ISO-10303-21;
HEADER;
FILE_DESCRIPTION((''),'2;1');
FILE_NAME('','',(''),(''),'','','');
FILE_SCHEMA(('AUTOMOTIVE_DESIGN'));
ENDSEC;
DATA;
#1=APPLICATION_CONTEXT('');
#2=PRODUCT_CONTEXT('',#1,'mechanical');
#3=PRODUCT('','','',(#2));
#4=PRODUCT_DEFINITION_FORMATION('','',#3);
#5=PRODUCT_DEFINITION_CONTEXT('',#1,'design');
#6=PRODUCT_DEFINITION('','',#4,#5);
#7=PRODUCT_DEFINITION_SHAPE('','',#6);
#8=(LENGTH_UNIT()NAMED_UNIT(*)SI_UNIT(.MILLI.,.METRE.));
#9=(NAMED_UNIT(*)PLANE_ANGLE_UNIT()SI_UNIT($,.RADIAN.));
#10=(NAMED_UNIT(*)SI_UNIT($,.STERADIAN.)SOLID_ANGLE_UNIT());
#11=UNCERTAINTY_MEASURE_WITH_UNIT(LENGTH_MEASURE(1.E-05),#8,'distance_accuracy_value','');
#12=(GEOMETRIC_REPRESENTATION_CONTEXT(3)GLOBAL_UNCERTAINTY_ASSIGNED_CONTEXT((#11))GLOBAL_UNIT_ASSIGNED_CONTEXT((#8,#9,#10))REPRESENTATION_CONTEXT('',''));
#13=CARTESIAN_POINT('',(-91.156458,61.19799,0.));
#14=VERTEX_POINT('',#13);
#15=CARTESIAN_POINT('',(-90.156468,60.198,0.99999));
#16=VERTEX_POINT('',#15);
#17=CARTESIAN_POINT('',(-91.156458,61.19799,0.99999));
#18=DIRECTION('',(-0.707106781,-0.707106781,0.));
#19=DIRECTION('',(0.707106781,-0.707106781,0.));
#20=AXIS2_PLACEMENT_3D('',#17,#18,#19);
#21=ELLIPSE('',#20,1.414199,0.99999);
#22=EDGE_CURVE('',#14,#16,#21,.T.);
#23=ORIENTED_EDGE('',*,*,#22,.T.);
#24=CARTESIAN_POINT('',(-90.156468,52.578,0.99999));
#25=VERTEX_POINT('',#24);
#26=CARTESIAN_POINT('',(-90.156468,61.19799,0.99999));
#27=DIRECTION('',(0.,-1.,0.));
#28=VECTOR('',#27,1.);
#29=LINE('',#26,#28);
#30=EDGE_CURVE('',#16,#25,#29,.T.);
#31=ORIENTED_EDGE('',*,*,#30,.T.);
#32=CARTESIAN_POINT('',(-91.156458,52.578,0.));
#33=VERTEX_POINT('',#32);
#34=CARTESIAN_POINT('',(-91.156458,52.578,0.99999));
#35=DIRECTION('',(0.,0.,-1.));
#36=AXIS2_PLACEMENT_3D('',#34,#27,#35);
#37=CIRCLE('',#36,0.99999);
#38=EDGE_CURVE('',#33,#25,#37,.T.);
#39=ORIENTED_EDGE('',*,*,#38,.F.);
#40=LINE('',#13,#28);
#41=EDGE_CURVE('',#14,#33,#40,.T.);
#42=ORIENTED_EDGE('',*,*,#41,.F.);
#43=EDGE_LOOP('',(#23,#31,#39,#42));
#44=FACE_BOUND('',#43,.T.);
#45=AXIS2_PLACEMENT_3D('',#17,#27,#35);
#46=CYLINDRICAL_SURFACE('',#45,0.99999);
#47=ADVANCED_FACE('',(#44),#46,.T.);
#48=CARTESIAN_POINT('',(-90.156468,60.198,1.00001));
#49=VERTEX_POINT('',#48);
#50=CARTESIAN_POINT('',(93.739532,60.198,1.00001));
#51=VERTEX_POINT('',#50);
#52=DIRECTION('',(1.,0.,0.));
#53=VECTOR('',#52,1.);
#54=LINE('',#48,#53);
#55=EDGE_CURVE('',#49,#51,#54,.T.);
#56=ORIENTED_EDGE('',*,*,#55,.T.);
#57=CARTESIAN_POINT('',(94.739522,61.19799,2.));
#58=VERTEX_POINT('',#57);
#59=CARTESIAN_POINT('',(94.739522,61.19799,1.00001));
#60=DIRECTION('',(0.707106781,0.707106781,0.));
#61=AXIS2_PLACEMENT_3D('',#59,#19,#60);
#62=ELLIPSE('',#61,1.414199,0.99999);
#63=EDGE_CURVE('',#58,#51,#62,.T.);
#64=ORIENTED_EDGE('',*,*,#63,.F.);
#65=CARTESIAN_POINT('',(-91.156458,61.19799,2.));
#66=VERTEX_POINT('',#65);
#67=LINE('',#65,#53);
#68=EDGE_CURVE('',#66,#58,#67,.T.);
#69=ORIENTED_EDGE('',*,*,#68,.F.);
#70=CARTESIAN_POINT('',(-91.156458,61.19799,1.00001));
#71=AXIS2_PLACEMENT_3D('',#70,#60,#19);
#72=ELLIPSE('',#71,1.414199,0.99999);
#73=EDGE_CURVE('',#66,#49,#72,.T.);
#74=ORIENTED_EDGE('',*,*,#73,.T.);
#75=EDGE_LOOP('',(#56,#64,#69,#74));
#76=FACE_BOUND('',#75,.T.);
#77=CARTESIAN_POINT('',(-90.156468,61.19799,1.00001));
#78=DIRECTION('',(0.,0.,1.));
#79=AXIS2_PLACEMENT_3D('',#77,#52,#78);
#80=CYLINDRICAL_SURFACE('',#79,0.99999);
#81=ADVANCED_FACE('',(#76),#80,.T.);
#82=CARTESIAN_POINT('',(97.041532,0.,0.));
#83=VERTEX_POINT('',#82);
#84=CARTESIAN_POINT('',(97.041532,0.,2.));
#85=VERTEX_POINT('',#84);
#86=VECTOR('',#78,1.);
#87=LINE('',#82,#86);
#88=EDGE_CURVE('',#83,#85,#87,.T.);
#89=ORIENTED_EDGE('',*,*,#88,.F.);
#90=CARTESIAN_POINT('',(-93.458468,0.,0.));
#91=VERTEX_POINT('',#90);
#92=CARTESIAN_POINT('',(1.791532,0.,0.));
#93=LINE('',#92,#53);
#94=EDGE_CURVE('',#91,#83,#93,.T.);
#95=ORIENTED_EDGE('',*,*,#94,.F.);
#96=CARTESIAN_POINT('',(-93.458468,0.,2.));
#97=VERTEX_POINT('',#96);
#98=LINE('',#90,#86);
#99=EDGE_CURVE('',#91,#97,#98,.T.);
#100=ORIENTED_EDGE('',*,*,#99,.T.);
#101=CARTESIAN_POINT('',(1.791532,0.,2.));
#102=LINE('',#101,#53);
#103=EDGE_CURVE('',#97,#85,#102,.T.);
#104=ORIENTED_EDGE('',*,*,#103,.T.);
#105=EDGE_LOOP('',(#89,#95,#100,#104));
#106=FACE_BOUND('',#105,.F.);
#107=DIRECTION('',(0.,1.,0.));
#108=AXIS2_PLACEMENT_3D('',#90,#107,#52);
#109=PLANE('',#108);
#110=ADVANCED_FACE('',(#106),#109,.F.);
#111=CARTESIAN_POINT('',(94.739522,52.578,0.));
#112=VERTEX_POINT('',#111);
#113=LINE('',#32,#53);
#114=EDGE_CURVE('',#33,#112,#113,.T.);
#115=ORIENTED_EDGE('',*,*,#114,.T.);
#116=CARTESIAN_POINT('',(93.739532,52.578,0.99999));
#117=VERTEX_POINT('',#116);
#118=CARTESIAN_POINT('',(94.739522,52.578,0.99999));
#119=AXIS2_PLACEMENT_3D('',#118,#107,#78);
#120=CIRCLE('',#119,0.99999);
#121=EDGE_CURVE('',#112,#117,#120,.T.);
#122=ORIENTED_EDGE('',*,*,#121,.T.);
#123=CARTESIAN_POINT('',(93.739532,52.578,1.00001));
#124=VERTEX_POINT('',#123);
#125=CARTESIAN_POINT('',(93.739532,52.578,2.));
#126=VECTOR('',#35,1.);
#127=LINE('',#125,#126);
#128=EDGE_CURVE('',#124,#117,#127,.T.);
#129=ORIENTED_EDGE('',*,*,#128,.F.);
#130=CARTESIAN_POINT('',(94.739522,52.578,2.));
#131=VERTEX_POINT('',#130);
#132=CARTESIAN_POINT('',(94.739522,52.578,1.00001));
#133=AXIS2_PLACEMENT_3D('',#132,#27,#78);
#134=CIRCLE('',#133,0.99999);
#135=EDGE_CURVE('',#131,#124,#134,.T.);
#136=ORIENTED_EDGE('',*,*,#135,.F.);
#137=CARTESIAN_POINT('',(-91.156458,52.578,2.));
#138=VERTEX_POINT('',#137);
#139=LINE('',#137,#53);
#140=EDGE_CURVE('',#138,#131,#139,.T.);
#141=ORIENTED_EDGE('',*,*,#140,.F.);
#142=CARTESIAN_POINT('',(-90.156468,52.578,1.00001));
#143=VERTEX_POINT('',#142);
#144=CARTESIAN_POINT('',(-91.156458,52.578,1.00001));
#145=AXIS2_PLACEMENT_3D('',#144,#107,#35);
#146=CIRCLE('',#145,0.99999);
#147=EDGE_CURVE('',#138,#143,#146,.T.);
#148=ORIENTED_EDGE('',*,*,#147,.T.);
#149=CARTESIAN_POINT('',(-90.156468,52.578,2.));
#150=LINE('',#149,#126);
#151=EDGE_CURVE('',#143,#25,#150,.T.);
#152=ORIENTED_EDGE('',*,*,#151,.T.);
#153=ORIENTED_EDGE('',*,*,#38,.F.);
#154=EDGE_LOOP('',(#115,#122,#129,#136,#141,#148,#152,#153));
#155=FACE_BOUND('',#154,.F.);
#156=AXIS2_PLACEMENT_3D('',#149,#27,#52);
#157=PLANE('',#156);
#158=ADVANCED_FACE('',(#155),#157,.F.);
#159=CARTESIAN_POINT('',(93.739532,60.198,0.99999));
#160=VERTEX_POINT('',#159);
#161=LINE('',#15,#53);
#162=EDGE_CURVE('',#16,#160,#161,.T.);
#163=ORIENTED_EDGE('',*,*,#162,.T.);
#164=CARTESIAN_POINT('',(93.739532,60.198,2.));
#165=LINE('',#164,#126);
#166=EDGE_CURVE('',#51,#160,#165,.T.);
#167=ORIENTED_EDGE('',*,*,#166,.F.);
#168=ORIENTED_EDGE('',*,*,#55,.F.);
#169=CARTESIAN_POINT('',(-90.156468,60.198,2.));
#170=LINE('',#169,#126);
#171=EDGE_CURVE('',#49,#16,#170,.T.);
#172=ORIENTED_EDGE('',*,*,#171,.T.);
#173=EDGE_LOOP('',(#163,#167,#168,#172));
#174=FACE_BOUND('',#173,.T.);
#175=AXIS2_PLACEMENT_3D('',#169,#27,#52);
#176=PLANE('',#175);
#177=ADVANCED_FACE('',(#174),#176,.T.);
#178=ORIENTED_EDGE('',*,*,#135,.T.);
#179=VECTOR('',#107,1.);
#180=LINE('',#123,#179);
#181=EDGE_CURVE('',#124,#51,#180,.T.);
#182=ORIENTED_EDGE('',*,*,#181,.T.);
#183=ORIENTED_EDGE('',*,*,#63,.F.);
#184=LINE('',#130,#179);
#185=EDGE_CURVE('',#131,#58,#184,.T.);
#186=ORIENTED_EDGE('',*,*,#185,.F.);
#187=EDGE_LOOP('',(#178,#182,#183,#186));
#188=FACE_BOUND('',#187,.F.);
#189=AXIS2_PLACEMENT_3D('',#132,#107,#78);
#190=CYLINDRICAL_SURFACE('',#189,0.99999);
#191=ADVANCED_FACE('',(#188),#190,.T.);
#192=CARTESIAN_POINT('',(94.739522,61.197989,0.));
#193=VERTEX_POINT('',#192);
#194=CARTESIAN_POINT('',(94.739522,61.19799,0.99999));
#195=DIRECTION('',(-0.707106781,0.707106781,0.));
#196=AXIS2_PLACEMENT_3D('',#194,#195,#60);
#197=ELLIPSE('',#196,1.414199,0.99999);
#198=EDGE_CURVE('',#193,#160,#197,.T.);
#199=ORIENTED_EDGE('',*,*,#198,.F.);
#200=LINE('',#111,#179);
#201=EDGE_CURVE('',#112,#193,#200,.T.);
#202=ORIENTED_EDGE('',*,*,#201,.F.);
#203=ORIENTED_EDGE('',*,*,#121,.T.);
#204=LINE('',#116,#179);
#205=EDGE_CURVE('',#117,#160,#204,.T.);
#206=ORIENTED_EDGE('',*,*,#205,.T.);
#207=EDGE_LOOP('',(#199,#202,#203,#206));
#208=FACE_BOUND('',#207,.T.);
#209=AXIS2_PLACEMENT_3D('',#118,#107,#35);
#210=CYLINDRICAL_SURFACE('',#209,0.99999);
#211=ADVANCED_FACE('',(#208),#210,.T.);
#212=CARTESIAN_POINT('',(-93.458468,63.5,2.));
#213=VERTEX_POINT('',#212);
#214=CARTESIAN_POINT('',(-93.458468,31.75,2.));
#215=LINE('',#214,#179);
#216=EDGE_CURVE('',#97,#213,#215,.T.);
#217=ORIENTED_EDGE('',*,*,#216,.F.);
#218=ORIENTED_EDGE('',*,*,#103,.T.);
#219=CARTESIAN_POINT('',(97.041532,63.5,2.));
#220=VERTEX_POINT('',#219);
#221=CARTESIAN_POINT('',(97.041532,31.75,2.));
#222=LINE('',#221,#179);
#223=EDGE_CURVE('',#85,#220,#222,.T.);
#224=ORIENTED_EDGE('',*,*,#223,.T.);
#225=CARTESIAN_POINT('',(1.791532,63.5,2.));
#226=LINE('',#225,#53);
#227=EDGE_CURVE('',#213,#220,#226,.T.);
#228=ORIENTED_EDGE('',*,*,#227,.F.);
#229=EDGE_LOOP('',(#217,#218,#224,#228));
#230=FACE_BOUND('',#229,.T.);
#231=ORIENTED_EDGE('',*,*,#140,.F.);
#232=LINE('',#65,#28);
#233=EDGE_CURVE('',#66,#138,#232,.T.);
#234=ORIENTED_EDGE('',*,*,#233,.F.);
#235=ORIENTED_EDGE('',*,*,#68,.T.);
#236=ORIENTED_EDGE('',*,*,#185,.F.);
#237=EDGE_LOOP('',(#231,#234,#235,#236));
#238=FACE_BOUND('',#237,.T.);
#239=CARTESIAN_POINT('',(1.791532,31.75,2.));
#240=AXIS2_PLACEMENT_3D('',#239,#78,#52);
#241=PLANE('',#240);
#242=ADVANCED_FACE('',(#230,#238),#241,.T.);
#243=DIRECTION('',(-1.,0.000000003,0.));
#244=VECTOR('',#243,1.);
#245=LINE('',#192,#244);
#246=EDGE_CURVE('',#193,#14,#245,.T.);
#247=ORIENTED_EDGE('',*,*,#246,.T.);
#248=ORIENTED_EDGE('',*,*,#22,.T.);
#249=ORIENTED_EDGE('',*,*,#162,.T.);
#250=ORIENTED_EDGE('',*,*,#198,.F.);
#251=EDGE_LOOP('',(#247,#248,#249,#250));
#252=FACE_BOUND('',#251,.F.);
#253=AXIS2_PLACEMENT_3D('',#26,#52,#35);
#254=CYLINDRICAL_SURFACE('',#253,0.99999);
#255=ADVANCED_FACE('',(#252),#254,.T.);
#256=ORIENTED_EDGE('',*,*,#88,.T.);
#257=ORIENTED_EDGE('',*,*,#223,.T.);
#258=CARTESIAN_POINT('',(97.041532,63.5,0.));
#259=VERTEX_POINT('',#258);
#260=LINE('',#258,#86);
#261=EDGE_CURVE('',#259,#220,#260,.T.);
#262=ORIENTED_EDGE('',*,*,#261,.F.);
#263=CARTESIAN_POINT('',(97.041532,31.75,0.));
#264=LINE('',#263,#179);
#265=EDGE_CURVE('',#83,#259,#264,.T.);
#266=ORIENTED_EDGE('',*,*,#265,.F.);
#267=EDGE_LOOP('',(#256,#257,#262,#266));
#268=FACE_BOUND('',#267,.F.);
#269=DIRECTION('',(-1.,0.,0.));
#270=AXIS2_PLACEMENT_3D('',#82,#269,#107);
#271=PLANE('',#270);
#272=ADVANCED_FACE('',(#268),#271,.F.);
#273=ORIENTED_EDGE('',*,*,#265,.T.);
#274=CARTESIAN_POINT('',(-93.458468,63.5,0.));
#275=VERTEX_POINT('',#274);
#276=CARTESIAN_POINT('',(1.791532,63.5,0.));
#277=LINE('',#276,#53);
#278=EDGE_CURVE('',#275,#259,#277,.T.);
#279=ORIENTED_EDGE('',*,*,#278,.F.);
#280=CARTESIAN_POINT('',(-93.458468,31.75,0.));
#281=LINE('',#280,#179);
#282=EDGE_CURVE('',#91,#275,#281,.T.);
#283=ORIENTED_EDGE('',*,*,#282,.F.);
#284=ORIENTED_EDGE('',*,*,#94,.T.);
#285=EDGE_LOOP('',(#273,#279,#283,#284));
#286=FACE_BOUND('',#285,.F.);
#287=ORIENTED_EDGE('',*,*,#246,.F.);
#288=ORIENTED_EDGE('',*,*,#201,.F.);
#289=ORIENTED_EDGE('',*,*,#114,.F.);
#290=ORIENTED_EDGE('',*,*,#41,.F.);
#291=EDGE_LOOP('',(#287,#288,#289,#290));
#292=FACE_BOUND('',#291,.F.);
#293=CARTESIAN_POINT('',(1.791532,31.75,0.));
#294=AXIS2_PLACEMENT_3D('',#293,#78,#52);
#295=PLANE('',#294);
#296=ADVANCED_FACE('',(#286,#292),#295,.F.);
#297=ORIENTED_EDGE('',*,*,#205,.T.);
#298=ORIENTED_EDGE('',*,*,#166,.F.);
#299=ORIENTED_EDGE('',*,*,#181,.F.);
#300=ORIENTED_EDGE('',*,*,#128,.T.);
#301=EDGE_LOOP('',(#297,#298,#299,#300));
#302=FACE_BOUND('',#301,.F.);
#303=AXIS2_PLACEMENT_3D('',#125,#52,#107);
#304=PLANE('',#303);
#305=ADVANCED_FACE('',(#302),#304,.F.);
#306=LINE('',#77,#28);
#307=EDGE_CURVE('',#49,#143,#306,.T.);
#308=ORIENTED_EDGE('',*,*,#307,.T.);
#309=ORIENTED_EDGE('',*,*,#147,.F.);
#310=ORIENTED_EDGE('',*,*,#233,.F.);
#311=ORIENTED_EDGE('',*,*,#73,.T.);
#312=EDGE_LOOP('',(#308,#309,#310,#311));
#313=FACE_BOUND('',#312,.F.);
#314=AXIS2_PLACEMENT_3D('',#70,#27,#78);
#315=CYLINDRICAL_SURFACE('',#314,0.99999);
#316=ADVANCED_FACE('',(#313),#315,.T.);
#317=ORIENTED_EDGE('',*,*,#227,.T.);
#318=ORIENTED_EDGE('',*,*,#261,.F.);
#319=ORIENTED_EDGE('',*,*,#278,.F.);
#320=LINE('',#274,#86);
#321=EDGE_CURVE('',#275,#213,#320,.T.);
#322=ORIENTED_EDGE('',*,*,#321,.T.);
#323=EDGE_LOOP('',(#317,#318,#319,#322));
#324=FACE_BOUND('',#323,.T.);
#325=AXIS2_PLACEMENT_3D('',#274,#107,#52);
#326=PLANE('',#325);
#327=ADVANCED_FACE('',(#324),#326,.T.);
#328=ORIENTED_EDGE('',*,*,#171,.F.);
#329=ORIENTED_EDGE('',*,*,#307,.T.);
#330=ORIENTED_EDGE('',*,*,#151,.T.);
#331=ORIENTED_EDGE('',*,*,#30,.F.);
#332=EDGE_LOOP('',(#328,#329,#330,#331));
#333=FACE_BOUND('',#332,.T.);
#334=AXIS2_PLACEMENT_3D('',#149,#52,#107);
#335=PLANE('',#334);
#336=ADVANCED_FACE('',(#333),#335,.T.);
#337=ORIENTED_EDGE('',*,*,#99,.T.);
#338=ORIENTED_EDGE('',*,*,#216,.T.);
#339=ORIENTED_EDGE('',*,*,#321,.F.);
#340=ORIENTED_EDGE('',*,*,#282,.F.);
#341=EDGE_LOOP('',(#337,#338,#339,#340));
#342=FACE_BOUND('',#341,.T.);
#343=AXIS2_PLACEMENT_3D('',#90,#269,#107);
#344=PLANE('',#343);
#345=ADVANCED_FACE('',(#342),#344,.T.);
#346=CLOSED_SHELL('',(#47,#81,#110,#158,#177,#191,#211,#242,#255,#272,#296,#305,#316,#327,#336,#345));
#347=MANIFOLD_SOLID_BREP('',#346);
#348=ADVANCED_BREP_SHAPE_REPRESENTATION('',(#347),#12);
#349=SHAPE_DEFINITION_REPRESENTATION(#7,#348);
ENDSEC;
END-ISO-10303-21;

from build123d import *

# Parameters (mm, degrees)
F0_W     = 190.5
F0_H     = 63.5
F1_DEPTH = 2
F2_W     = 183.896
F2_H     = 7.62
F3_DEPTH = 25.4
F4_R     = 0.99999
F5_R     = 0.99999


# Not quite as in the source:
# - a fillet or chamfer is up to 0.001 mm smaller than in the source, because OpenCascade refuses the exact size


with BuildPart() as f1:
    # F0 (on Top) → F1 (new body)
    with BuildSketch(Plane.XY):
        with Locations((1.791532172, 31.75)):
            Rectangle(F0_W, F0_H)
    extrude(amount=F1_DEPTH)

    # F2 (on face) → F3 (cut)
    with BuildSketch(Plane.XY.offset(2)):
        with Locations((1.791532172, 56.388)):
            Rectangle(F2_W, F2_H)
    extrude(amount=-F3_DEPTH, mode=Mode.SUBTRACT)

    # F4 (radius 1 in the source; OpenCascade refuses exactly that, so slightly less here)
    f4_edges = [f1.edges().sort_by_distance(p)[0] for p in [
        (1.791532, 60.198, 2),
        (1.791532, 60.198, 0),
    ]]
    fillet(f4_edges, radius=F4_R)

    # F5 (radius 1 in the source; OpenCascade refuses exactly that, so slightly less here)
    f5_edges = [f1.edges().sort_by_distance(p)[0] for p in [
        (93.739532, 56.388, 0),
        (93.739532, 56.388, 2),
        (-90.156468, 56.388, 2),
        (-90.156468, 56.388, 0),
    ]]
    fillet(f5_edges, radius=F5_R)


solid = f1.part
